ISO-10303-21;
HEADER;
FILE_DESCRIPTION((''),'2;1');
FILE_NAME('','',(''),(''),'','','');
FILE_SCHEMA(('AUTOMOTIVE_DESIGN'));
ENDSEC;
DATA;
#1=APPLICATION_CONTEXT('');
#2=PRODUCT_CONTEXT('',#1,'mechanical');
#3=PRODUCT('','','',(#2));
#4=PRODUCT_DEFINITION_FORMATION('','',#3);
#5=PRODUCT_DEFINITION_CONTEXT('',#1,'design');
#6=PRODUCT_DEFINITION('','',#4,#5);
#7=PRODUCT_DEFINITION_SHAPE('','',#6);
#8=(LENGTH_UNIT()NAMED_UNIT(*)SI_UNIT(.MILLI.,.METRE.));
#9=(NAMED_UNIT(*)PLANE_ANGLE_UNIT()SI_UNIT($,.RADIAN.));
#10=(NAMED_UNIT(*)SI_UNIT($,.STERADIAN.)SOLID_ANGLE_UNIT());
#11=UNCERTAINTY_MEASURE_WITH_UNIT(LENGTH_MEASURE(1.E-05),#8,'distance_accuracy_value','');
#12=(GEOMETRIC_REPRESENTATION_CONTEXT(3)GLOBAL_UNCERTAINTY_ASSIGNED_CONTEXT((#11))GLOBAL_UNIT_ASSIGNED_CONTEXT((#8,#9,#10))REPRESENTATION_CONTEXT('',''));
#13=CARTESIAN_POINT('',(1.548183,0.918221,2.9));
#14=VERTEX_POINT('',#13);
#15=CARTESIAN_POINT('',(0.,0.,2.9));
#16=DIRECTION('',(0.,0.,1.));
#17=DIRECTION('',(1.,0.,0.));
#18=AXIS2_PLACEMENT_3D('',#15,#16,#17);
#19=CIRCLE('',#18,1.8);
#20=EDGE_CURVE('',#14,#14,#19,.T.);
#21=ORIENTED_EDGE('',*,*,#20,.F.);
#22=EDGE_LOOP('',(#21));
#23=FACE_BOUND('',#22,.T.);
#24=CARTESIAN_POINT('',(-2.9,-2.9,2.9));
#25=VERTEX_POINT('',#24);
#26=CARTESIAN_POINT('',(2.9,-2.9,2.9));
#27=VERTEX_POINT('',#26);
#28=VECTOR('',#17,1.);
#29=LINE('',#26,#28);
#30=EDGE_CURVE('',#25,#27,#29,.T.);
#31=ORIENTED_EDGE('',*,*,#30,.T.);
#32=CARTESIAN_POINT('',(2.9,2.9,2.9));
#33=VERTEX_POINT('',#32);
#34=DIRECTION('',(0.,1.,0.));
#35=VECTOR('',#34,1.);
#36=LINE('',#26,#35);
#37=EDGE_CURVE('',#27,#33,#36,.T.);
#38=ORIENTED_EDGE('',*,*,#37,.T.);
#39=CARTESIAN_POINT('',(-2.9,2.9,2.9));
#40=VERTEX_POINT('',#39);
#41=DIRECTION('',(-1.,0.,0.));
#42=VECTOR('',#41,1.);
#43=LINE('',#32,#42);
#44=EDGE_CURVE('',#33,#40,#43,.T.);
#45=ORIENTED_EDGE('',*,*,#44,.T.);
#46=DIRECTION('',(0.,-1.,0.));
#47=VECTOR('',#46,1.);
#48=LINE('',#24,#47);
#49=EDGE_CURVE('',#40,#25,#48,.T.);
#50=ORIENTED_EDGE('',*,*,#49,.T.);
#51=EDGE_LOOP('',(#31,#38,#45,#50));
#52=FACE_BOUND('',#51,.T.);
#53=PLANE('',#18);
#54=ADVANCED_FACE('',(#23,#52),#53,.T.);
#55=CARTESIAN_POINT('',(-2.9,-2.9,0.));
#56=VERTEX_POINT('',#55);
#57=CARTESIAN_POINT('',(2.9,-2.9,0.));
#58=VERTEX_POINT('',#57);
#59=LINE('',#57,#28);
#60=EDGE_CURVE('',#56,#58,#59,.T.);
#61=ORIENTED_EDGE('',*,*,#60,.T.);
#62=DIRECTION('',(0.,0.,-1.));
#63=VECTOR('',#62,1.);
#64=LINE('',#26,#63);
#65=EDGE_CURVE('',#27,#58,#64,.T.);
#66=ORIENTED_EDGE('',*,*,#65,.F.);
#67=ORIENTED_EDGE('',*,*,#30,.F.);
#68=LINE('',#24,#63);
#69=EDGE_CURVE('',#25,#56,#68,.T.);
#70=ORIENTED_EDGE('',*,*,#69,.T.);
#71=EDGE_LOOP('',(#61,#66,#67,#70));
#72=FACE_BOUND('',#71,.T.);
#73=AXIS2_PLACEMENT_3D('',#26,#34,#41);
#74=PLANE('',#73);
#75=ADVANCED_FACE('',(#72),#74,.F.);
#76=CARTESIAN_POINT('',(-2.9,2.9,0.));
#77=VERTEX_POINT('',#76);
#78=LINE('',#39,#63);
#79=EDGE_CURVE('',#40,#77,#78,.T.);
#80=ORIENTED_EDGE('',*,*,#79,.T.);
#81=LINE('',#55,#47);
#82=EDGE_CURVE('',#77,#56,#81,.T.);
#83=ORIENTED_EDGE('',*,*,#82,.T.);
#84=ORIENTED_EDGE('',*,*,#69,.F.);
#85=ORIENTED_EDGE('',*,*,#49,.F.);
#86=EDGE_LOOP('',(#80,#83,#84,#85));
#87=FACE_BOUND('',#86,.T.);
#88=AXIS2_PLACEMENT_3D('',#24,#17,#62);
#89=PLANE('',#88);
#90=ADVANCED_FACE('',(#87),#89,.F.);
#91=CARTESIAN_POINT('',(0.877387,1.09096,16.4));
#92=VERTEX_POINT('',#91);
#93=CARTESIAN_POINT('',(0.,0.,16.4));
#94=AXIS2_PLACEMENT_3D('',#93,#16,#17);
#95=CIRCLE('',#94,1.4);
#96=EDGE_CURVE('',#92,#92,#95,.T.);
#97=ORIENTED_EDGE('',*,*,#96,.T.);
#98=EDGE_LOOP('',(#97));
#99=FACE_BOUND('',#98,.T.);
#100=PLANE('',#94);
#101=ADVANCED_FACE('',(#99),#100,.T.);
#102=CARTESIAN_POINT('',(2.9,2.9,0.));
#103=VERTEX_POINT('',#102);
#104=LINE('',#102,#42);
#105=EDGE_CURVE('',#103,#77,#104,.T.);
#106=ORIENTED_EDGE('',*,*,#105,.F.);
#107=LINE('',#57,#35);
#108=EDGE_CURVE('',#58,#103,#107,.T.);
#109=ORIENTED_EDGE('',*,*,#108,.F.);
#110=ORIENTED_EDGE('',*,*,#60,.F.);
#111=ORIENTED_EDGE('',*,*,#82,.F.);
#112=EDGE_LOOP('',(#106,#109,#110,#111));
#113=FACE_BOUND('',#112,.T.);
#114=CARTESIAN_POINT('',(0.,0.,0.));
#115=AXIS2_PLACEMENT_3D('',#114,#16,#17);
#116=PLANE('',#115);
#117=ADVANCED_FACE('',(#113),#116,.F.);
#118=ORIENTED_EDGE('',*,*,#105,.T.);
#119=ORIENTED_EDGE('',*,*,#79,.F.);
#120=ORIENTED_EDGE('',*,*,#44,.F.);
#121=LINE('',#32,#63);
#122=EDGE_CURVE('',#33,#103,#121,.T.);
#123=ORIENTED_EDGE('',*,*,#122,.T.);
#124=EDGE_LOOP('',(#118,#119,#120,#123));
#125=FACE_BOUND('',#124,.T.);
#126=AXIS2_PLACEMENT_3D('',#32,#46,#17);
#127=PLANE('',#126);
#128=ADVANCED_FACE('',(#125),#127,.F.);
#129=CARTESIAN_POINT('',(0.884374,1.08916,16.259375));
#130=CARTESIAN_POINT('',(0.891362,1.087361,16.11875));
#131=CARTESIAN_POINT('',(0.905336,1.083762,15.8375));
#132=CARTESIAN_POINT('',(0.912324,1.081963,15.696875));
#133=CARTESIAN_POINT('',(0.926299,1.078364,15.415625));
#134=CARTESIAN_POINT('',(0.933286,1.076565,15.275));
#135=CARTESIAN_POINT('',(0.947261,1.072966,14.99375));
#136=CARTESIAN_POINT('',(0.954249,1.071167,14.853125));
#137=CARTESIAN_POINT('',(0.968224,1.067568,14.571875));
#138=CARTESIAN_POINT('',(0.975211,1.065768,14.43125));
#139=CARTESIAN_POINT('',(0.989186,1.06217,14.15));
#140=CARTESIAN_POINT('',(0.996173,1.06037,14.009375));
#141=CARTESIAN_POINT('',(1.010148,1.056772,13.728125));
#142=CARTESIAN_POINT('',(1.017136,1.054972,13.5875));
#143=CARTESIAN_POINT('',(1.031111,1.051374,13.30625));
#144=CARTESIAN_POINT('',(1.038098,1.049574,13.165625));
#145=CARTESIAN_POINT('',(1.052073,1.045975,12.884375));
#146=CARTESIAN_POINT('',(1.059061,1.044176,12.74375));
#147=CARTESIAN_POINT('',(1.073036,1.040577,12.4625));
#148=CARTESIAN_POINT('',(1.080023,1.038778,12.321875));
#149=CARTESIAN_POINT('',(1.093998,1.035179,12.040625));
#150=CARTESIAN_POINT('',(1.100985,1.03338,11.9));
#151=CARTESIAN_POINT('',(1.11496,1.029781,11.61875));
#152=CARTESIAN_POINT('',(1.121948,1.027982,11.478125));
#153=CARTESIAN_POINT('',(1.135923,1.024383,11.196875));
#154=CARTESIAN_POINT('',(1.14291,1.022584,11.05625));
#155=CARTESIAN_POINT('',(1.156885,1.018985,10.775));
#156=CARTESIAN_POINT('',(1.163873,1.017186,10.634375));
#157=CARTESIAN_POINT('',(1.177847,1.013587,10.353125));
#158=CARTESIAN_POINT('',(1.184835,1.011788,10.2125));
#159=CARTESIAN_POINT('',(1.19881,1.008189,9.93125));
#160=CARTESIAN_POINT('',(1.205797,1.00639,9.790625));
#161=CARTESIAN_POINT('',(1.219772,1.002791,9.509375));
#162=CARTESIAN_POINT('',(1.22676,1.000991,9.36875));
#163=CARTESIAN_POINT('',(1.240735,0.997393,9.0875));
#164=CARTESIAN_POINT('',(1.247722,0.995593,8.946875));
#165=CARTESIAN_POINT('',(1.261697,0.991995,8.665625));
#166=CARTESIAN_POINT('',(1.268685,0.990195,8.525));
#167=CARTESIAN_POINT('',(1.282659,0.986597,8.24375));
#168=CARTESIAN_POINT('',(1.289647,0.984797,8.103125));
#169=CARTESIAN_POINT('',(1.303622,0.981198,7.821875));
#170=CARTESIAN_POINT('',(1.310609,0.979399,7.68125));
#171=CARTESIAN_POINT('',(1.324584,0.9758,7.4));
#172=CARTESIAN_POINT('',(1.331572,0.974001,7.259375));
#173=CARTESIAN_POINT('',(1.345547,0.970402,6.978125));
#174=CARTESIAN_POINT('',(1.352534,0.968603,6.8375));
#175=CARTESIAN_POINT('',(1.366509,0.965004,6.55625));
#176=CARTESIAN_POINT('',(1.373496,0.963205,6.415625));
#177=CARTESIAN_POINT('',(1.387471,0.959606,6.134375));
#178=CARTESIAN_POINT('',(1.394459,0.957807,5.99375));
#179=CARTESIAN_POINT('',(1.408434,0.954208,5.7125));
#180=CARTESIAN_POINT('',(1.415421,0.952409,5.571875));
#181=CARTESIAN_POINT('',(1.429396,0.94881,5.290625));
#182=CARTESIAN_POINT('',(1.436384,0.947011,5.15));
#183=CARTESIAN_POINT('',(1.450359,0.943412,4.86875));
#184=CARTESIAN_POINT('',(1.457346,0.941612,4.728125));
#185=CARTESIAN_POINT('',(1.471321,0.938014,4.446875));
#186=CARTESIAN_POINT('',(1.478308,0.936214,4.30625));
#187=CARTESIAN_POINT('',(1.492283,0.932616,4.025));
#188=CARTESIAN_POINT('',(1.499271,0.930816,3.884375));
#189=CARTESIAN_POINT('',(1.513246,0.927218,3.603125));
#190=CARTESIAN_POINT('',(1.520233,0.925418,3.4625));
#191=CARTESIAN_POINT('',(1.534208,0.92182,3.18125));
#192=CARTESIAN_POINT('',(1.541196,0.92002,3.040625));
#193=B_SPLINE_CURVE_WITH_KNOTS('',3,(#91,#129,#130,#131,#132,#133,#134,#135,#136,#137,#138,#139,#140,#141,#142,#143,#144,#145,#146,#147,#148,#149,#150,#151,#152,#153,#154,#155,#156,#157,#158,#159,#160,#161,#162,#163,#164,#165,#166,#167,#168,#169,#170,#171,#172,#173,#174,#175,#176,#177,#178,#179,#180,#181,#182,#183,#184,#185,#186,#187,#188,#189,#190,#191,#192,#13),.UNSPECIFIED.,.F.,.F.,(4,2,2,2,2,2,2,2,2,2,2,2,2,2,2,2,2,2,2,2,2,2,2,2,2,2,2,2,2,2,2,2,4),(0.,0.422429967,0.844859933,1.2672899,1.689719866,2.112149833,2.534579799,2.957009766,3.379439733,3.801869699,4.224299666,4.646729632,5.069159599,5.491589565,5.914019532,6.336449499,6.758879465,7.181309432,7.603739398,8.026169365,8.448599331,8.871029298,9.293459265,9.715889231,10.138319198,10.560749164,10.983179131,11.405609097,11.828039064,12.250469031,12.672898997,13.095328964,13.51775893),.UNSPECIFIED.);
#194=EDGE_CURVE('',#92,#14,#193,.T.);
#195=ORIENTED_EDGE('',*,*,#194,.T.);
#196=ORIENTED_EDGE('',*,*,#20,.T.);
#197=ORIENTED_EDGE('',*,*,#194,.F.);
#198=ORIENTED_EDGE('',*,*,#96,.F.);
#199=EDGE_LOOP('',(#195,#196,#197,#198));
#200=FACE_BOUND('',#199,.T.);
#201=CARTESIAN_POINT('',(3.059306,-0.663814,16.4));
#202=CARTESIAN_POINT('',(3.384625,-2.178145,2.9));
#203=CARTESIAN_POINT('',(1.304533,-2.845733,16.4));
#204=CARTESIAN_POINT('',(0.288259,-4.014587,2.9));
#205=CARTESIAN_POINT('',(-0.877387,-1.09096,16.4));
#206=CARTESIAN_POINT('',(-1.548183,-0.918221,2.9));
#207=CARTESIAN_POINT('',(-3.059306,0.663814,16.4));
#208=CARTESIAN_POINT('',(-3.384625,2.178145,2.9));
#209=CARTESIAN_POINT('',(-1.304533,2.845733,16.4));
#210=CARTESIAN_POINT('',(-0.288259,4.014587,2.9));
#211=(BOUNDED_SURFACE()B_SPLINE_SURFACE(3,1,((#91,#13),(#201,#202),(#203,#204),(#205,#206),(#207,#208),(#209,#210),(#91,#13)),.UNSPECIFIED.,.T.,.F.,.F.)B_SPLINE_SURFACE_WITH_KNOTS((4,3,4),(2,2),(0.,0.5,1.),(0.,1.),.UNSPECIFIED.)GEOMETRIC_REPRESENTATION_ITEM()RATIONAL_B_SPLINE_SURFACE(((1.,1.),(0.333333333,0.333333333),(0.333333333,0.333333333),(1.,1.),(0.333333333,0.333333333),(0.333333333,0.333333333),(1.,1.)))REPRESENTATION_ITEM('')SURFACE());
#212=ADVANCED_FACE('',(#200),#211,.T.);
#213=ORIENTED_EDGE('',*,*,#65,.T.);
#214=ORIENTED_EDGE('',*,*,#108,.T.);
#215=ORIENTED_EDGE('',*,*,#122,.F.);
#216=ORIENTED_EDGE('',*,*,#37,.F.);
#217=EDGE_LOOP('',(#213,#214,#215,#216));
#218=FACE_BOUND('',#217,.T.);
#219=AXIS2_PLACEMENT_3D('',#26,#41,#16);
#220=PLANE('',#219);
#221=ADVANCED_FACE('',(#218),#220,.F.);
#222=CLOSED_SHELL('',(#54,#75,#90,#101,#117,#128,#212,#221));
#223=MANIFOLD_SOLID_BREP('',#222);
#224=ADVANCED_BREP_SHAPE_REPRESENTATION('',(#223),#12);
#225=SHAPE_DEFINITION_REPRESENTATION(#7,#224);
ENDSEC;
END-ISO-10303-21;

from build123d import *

# Parameters (mm, degrees)
SKETCH1_W           = 5.8
SKETCH1_H           = 5.8
BOSS_EXTRUDE1_DEPTH = 2.9


with BuildPart() as part:
    # Sketch1 → Boss-Extrude1 (new body)
    with BuildSketch(Plane.XY):
        Rectangle(SKETCH1_W, SKETCH1_H)
    extrude(amount=BOSS_EXTRUDE1_DEPTH)

    # Loft1: read off the stored shape, not the designer's step
    # Loft1: loft between two sections, ruled curve by curve
    loft1_from = [
        Edge.make_bspline([(0.877386601, 1.090959556, 16.4), (3.059305712, -0.663813647, 16.4), (1.30453251, -2.845732758, 16.4), (-0.877386601, -1.090959556, 16.4), (-3.059305712, 0.663813647, 16.4), (-1.30453251, 2.845732758, 16.4), (0.877386601, 1.090959556, 16.4)], [0, 0, 0, 0, 0.5, 0.5, 0.5, 1, 1, 1, 1], 3, [1, 0.333333333, 0.333333333, 1, 0.333333333, 0.333333333, 1]),
    ]
    loft1_to = [
        Edge.make_bspline([(1.548183001, 0.918220777, 2.9), (3.384624555, -2.178145225, 2.9), (0.288258553, -4.014586779, 2.9), (-1.548183001, -0.918220777, 2.9), (-3.384624555, 2.178145225, 2.9), (-0.288258553, 4.014586779, 2.9), (1.548183001, 0.918220777, 2.9)], [0, 0, 0, 0, 0.5, 0.5, 0.5, 1, 1, 1, 1], 3, [1, 0.333333333, 0.333333333, 1, 0.333333333, 0.333333333, 1]),
    ]
    loft1 = Solid(Shell([*[Face.make_surface_from_curves(loft1_from[k], loft1_to[k]) for k in range(1)], Face(Wire(loft1_from)), Face(Wire(loft1_to))]))
    add(loft1)


solid = part.part
